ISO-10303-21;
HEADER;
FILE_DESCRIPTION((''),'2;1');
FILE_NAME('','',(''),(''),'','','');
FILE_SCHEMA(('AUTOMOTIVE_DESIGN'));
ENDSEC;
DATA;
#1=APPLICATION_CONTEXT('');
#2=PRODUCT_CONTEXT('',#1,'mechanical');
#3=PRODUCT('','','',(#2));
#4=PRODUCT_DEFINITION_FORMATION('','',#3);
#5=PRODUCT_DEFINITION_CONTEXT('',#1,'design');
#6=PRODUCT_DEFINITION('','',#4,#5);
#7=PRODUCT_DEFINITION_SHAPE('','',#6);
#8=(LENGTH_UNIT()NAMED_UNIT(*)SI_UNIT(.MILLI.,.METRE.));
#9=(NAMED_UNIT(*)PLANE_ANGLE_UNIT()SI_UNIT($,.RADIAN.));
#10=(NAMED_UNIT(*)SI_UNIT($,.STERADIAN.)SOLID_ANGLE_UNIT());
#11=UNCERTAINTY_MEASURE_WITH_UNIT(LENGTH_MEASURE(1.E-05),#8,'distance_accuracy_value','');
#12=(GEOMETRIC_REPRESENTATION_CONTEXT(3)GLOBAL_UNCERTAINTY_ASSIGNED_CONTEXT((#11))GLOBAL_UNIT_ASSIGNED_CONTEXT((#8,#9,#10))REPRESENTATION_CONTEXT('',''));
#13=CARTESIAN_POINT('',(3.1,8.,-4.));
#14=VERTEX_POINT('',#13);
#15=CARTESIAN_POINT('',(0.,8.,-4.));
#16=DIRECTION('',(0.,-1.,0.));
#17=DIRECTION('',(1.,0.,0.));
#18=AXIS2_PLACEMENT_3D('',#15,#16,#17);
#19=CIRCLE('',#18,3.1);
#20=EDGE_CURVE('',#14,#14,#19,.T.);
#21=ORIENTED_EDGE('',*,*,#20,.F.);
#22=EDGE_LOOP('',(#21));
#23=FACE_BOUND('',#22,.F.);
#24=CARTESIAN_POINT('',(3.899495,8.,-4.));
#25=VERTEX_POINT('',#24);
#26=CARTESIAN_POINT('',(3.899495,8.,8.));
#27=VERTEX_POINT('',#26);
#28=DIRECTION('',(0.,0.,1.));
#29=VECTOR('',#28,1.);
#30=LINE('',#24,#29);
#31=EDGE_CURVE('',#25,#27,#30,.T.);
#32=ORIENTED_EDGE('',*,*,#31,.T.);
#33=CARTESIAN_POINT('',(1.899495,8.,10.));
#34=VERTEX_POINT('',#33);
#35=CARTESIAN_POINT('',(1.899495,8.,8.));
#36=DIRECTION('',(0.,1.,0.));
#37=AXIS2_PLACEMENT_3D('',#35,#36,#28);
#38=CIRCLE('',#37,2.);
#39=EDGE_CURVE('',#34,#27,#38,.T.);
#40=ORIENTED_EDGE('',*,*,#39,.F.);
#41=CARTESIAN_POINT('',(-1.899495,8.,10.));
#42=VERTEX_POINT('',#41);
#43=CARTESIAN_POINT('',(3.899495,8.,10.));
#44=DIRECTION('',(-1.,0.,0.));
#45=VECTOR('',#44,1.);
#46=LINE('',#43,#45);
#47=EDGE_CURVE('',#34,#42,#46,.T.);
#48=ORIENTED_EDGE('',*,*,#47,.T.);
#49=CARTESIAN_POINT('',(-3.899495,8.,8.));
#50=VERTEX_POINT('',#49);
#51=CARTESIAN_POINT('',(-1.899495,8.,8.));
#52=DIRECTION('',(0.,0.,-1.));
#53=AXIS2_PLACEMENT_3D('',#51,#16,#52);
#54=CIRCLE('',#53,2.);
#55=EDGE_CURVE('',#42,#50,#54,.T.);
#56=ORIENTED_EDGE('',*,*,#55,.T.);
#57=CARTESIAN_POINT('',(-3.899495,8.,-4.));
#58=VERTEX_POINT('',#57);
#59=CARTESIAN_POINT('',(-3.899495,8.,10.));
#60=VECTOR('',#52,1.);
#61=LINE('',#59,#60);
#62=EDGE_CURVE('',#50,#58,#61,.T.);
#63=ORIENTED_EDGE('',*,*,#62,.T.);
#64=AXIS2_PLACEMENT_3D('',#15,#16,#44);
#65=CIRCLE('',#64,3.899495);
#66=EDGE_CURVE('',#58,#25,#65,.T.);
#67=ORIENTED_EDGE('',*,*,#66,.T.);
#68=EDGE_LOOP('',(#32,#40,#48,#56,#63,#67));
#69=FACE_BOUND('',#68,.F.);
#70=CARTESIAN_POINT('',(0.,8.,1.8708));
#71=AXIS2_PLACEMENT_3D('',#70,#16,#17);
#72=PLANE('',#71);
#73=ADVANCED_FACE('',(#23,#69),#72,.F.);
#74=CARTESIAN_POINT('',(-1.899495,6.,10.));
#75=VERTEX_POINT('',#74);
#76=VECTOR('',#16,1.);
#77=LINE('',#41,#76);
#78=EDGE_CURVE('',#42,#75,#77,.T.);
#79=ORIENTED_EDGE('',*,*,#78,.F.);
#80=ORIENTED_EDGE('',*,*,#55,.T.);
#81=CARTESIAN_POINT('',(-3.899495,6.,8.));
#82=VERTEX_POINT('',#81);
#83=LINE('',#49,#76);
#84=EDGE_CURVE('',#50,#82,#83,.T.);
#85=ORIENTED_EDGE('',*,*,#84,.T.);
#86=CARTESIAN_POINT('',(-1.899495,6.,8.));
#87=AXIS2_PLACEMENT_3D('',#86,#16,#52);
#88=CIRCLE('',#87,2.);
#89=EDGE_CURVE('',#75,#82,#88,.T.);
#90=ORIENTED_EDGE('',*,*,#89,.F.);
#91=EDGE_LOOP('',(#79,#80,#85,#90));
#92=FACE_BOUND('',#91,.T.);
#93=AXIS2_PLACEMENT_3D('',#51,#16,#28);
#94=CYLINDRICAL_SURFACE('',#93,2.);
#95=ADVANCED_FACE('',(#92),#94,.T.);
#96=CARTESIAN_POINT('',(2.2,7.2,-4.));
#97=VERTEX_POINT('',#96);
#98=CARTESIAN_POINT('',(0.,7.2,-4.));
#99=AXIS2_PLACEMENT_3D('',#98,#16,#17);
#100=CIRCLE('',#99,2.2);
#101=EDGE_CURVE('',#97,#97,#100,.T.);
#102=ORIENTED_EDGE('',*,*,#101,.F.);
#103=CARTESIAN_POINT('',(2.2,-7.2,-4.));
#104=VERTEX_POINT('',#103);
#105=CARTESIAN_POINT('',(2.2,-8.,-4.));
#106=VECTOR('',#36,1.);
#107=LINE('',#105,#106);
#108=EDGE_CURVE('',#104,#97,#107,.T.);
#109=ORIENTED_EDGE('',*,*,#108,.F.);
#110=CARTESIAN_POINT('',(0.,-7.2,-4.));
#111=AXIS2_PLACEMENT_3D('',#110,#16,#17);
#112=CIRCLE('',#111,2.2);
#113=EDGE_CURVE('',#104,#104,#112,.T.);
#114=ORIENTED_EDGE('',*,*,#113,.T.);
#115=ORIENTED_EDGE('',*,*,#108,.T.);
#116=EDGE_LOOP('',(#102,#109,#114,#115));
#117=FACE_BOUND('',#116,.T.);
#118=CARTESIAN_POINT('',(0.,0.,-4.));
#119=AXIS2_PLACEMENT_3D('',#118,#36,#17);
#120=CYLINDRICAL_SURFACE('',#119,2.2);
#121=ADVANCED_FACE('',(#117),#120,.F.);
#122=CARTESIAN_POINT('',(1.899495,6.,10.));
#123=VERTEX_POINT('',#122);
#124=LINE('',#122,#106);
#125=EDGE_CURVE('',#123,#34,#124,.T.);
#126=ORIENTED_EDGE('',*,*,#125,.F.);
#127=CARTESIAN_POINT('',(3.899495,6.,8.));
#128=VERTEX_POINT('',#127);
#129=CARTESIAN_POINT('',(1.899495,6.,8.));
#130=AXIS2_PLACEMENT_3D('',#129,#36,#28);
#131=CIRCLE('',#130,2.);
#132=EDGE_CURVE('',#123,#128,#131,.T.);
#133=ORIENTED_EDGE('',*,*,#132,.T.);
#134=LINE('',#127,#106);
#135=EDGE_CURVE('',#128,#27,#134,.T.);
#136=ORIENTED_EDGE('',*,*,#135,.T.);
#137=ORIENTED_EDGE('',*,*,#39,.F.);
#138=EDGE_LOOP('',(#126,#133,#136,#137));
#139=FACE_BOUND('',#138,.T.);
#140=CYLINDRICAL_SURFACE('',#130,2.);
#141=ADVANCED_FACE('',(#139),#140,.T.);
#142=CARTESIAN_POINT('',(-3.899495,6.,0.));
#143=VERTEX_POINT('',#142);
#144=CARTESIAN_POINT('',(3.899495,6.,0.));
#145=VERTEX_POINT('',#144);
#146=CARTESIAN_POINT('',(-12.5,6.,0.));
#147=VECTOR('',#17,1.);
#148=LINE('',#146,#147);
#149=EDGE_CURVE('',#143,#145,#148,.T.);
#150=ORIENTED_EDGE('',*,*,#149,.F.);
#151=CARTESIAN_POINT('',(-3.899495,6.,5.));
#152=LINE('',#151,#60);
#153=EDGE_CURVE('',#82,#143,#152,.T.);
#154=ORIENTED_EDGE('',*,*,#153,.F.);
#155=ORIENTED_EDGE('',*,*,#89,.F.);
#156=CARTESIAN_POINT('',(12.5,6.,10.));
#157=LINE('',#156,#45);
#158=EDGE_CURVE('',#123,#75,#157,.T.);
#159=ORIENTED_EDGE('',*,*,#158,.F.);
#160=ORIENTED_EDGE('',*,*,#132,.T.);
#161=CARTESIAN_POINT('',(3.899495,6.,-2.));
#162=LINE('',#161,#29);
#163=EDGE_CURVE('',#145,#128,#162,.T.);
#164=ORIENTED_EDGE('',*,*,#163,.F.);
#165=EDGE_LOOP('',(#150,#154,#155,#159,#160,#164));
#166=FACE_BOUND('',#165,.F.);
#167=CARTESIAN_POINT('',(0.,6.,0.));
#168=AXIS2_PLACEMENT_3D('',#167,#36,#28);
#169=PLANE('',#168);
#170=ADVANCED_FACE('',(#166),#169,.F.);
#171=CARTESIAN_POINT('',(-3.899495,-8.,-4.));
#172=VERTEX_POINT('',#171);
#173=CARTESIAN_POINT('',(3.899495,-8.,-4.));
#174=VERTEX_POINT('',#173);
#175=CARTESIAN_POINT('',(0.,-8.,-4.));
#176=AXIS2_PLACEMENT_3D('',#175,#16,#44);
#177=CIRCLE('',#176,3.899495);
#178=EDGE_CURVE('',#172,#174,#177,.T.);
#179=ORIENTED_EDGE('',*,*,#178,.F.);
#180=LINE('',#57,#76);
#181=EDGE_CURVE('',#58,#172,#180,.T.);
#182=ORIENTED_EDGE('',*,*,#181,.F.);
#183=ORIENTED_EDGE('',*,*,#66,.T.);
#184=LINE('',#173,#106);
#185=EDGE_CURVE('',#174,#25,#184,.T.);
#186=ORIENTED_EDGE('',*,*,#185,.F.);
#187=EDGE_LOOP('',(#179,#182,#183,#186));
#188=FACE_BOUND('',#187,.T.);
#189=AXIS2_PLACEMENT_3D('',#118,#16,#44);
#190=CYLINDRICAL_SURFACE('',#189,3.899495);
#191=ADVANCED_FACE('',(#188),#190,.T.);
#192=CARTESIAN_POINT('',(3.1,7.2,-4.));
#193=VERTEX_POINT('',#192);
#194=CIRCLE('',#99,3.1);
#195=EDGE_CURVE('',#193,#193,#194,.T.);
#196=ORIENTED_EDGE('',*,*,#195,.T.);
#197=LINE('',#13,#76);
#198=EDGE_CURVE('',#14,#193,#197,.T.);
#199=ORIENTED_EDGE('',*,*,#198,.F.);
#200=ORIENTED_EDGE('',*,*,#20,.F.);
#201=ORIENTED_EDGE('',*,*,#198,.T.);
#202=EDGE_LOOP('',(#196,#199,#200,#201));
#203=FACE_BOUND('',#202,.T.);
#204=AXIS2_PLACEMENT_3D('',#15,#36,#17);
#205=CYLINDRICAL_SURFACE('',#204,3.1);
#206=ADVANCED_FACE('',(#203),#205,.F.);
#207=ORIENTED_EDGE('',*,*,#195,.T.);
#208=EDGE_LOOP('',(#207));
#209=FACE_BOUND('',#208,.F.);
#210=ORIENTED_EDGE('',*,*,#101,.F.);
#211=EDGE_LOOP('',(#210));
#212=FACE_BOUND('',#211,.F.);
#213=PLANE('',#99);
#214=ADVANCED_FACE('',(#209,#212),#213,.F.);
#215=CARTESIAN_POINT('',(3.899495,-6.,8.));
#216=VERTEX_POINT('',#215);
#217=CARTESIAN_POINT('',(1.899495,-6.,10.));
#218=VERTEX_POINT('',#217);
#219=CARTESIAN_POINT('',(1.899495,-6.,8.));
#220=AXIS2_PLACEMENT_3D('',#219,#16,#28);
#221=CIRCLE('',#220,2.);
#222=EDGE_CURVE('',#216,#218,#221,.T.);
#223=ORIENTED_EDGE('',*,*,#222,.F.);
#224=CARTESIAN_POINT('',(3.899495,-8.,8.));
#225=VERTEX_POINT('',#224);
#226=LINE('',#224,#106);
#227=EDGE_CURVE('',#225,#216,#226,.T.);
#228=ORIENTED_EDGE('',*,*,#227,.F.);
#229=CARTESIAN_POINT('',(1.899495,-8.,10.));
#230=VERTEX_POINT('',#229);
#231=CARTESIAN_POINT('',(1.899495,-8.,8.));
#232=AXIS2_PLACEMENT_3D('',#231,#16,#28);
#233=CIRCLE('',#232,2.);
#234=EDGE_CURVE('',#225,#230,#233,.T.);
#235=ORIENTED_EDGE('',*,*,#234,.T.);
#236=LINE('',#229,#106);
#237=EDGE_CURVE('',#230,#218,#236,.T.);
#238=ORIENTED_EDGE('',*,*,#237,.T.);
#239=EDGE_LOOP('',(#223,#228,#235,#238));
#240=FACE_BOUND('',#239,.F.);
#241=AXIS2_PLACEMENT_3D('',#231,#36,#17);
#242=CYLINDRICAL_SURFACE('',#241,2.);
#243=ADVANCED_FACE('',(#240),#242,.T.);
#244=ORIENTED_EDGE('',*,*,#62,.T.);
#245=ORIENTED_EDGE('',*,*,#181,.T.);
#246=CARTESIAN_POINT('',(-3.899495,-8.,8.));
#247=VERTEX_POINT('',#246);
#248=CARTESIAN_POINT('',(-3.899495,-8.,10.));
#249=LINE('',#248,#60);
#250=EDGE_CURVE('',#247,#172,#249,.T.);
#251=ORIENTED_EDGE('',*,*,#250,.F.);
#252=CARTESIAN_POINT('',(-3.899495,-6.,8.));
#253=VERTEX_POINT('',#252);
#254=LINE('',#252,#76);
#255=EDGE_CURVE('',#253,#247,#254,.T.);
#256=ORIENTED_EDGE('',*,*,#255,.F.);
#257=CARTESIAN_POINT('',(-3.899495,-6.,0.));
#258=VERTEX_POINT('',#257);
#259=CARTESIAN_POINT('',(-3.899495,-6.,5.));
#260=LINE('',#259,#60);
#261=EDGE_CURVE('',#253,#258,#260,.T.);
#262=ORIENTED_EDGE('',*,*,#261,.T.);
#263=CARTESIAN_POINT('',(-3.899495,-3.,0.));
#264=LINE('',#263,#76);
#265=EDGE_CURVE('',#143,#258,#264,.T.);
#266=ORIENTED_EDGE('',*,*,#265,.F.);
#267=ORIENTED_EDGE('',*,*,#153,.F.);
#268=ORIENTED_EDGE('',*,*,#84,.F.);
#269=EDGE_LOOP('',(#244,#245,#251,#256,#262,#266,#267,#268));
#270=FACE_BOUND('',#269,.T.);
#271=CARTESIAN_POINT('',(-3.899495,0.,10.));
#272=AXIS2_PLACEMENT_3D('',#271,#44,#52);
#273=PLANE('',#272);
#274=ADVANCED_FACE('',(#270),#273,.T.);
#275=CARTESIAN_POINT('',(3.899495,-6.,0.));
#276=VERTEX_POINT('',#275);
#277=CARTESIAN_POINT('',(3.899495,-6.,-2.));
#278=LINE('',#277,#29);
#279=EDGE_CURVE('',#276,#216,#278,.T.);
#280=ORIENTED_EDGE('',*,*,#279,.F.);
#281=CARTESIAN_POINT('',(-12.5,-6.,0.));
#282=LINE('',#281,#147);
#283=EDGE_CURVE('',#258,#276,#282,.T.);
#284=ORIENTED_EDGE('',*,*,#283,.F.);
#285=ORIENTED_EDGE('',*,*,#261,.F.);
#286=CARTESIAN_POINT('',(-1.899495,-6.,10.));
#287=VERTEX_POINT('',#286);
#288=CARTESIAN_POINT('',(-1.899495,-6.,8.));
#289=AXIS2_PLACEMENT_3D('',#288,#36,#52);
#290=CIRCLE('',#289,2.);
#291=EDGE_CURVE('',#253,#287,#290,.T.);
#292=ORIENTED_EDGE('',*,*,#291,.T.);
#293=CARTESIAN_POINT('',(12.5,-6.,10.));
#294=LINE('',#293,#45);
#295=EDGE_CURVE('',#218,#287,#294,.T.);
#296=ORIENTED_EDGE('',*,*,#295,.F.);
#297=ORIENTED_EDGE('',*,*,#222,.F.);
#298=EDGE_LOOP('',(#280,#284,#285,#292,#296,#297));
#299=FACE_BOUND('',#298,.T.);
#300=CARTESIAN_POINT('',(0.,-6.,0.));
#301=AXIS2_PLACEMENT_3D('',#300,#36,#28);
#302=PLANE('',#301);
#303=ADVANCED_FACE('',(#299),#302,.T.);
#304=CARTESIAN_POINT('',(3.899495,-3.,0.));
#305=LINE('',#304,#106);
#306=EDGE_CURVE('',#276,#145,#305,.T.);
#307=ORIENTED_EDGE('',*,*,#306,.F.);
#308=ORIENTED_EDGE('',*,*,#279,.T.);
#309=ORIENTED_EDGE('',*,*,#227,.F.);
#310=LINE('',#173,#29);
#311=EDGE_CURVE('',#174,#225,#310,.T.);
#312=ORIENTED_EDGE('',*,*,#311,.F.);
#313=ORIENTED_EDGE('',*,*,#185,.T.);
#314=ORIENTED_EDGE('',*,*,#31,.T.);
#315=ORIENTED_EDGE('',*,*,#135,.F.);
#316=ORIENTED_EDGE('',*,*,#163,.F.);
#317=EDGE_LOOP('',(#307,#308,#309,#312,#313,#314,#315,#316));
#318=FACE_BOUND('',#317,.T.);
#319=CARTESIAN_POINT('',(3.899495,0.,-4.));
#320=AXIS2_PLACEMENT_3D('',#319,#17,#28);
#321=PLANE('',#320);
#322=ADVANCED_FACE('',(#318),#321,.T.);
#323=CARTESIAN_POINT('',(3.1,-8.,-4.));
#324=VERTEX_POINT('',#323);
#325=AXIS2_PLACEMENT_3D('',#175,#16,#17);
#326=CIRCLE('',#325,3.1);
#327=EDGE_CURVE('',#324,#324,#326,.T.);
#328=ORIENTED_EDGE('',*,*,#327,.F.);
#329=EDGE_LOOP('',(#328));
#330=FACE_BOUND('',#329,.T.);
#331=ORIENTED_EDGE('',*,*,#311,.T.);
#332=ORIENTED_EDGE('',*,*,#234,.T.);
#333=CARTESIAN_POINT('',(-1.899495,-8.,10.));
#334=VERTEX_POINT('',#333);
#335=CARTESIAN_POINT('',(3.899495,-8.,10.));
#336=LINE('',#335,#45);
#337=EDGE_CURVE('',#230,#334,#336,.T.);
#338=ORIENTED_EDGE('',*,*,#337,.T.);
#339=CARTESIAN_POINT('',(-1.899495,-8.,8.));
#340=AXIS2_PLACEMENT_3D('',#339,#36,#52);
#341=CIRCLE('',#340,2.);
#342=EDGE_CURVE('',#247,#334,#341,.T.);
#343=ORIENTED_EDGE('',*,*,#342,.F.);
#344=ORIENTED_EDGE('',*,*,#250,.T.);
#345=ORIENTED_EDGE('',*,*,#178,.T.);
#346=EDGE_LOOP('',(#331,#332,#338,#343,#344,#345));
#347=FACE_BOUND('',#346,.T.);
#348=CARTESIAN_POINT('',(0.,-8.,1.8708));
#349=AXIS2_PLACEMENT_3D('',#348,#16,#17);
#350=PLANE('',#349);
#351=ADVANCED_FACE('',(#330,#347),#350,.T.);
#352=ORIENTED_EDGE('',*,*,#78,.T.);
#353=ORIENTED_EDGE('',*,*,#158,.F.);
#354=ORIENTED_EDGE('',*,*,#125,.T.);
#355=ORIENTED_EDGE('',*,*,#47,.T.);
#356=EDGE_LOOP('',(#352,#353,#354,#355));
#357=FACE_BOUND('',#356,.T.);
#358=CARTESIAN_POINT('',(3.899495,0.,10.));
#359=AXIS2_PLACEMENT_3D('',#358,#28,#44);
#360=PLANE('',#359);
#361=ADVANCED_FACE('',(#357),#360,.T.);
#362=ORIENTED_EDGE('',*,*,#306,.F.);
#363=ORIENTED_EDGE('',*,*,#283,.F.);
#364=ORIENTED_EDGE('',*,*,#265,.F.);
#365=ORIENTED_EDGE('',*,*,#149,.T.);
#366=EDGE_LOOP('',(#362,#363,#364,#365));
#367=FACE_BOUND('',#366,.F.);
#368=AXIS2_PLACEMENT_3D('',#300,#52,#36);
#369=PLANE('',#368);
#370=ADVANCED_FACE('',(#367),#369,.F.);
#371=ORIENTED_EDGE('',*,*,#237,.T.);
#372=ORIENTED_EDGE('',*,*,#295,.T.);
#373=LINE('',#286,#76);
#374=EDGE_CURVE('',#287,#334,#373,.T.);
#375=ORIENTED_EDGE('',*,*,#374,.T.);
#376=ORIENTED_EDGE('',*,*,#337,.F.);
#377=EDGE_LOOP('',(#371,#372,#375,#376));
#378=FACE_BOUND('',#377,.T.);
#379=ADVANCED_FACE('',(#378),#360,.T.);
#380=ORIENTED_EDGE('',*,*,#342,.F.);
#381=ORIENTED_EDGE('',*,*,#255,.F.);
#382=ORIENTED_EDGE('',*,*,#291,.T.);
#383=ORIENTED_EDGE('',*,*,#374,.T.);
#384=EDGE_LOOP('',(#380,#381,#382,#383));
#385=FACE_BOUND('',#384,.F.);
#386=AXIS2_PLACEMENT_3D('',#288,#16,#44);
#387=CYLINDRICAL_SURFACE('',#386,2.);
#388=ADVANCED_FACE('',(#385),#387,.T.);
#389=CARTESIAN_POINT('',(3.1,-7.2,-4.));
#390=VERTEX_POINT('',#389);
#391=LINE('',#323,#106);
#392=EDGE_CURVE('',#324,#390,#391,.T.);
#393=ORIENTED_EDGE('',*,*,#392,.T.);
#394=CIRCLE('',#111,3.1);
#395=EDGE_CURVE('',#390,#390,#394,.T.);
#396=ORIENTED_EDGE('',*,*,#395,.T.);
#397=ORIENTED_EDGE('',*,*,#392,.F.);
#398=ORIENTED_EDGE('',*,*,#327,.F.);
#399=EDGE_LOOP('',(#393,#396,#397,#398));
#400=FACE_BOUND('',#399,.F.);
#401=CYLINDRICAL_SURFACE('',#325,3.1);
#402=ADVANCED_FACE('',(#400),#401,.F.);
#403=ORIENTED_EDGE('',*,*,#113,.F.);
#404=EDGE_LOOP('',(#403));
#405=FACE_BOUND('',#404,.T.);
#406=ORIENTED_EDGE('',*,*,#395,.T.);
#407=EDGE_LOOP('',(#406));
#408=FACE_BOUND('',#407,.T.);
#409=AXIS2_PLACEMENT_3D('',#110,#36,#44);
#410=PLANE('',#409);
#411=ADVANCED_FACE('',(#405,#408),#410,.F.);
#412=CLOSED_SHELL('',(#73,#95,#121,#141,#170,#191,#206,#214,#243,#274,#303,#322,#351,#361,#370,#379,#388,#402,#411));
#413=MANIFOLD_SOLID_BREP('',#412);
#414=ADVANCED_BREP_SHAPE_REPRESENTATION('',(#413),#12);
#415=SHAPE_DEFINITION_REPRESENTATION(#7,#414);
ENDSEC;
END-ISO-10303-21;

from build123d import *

# Parameters (mm, degrees)
F2_R     = 3.1
F2_R_2   = 2.2
F4_DEPTH = 8
F3_W     = 12
F3_H     = 10
F5_DEPTH = 12.5
F6_R     = 2
F7_DEPTH = 0.8


# Not quite as in the source:
# - the program builds the solid bodies; features that only make, move or delete a surface that nothing else refers to are left out


with BuildPart() as f4:
    # F2 (on Front) → F4 (new body, symmetric)
    with BuildSketch(Plane.XZ):
        with BuildLine():
            Line((3.8994949366, 10), (-3.8994949366, 10))
            Line((-3.8994949366, 10), (-3.8994949366, -4))
            ThreePointArc((-3.8994949366, -4), (0, -7.8994949366), (3.8994949366, -4))
            Line((3.8994949366, -4), (3.8994949366, 10))
        make_face()
        with Locations((0, -4)):
            Circle(F2_R, mode=Mode.SUBTRACT)
        with Locations((0, -4)):
            Circle(F2_R)
        with Locations((0, -4)):
            Circle(F2_R_2, mode=Mode.SUBTRACT)
    extrude(amount=F4_DEPTH, both=True)

    # F3 (on Right) → F5 (cut, symmetric)
    with BuildSketch(Plane.YZ):
        with Locations((0, 5)):
            Rectangle(F3_W, F3_H)
    extrude(amount=F5_DEPTH, both=True, mode=Mode.SUBTRACT)

    # F6
    f6_edges = [f4.edges().sort_by_distance(p)[0] for p in [
        (-3.899495, -7, 10),
        (3.899495, -7, 10),
        (3.899495, 7, 10),
        (-3.899495, 7, 10),
    ]]
    fillet(f6_edges, radius=F6_R)


with BuildPart() as f7:
    # F2 (on Front) → F7 (new body)
    with BuildSketch(Plane.XZ):
        with Locations((0, -4)):
            Circle(F2_R)
        with Locations((0, -4)):
            Circle(F2_R_2, mode=Mode.SUBTRACT)
    extrude(amount=F7_DEPTH)


with BuildPart() as f7_1:
    # F8: moved
    add(f7.part.moved(Location((0, 8, 0))))


with BuildPart() as f9_1:
    # F9: instance of F7
    add(f7_1.part.mirror(Plane.XZ))


with BuildPart() as f4_1:
    add(f4.part)

    # F10: cut F7, F9_1
    add(f7_1.part, mode=Mode.SUBTRACT)
    add(f9_1.part, mode=Mode.SUBTRACT)


solid = f4_1.part
